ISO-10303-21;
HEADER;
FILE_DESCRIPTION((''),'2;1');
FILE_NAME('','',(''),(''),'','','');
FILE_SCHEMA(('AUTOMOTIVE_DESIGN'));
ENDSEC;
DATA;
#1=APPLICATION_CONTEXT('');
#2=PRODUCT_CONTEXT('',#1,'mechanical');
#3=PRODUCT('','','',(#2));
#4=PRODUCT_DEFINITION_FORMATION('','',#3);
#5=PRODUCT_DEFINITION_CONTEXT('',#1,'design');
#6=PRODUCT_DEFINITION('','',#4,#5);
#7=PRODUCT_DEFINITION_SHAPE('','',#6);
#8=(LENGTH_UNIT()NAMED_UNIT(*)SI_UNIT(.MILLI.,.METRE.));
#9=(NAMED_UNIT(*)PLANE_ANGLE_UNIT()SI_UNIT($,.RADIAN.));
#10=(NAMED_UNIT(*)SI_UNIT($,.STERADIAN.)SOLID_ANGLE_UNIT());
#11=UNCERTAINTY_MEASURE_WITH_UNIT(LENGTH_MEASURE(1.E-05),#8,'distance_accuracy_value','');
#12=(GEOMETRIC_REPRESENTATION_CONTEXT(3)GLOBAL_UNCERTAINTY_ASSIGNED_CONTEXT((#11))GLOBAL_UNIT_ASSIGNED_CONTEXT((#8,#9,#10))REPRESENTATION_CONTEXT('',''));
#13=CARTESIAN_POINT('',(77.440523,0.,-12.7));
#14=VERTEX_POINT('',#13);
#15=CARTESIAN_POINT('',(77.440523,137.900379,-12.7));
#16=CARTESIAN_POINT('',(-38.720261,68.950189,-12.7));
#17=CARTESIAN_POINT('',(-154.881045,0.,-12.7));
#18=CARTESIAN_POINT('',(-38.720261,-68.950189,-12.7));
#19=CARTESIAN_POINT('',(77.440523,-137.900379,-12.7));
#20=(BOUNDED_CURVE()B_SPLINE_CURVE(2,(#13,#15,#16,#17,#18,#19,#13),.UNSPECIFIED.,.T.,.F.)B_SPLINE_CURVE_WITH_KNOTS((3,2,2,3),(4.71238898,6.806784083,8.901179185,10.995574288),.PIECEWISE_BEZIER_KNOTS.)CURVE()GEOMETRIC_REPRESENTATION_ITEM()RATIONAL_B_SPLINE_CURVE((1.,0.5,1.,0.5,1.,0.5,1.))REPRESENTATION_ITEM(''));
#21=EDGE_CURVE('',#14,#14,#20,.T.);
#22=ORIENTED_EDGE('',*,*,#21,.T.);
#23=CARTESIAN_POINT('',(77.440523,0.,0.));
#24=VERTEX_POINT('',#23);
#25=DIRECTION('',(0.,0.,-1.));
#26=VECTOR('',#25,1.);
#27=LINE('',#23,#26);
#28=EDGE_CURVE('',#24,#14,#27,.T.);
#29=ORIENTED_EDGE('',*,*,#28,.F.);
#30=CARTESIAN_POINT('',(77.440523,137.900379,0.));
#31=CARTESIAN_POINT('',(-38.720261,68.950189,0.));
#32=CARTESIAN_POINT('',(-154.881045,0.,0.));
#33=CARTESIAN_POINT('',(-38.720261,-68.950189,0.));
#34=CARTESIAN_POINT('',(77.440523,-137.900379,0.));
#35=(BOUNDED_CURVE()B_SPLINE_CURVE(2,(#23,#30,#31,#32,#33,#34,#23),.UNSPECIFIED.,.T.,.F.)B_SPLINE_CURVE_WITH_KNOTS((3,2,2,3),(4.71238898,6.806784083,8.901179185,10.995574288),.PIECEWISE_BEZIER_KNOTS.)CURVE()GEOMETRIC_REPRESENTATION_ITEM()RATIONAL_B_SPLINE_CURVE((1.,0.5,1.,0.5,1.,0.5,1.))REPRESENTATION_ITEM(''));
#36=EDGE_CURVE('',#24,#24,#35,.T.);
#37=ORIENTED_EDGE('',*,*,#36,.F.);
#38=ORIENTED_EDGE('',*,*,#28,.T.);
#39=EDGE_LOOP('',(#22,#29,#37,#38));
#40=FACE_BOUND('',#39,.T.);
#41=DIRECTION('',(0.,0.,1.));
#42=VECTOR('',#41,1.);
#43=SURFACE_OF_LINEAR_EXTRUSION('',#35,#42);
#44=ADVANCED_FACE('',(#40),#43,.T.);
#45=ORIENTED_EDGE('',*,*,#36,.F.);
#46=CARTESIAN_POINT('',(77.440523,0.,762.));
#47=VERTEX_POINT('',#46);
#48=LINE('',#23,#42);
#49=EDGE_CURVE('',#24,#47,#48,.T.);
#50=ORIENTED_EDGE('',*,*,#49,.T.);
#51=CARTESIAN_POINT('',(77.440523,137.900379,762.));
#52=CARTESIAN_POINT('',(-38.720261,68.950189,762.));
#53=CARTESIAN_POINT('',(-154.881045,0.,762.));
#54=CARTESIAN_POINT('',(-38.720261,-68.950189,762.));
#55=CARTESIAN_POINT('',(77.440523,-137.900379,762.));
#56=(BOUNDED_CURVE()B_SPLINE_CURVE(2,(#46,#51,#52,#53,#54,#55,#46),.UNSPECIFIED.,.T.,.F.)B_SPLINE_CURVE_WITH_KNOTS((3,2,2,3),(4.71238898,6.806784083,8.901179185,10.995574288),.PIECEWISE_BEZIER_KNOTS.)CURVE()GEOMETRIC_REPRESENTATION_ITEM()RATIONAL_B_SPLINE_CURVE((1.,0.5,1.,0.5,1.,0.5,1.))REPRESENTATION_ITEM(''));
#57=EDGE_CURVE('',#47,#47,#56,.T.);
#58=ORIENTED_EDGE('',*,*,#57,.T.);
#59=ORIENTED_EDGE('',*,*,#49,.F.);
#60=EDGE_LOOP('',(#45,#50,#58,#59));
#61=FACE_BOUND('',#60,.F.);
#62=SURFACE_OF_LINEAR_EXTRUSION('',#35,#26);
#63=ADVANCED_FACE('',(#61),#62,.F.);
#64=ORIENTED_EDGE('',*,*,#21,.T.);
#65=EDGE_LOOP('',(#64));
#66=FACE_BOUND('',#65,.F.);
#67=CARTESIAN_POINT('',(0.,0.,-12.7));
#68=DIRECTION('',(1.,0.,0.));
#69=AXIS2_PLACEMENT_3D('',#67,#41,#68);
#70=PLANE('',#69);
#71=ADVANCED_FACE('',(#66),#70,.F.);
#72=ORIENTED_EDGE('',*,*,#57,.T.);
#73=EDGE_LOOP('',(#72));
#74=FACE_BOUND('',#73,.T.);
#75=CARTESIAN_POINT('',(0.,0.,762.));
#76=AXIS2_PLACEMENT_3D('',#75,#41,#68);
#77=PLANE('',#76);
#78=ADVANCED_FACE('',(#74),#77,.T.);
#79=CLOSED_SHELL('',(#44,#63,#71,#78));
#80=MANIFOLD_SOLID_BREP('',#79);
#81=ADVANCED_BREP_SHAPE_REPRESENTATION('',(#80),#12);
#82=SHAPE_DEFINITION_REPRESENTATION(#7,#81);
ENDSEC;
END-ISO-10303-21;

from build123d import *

# Parameters (mm, degrees)
F1_DEPTH      = 762
F1_DEPTH_BACK = 12.7
F2_R          = 61.0536271801
F3_DEPTH      = 736.6


# Not quite as in the source:
# - a length typed as a fraction of an inch, garbled in the dataset ("3 / 203.2 mm" for 3/8 in), is restored


with BuildPart() as f1:
    # F0 (on Top) → F1 (new body, two sides)
    with BuildSketch(Plane.XY) as f1_sk:
        with BuildLine():
            add(Edge.make_bspline(
                [(77.4405226111, 0), (77.4405226111, 137.9003787083), (-38.7202613056, 68.9501893541), (-154.8810452223, 0), (-38.7202613056, -68.9501893541), (77.4405226111, -137.9003787083), (77.4405226111, 0)],
                knots=[4.7123889804, 4.7123889804, 4.7123889804, 6.8067840828, 6.8067840828, 8.9011791852, 8.9011791852, 10.9955742876, 10.9955742876, 10.9955742876], degree=2, weights=[1, 0.5, 1, 0.5, 1, 0.5, 1]))
        make_face()
    extrude(amount=F1_DEPTH)
    extrude(f1_sk.sketch, amount=-F1_DEPTH_BACK)

    # F2 (on face) → F3 (join)
    with BuildSketch(Plane.XY.offset(762)):
        Circle(F2_R)
    extrude(amount=-F3_DEPTH)


solid = f1.part
